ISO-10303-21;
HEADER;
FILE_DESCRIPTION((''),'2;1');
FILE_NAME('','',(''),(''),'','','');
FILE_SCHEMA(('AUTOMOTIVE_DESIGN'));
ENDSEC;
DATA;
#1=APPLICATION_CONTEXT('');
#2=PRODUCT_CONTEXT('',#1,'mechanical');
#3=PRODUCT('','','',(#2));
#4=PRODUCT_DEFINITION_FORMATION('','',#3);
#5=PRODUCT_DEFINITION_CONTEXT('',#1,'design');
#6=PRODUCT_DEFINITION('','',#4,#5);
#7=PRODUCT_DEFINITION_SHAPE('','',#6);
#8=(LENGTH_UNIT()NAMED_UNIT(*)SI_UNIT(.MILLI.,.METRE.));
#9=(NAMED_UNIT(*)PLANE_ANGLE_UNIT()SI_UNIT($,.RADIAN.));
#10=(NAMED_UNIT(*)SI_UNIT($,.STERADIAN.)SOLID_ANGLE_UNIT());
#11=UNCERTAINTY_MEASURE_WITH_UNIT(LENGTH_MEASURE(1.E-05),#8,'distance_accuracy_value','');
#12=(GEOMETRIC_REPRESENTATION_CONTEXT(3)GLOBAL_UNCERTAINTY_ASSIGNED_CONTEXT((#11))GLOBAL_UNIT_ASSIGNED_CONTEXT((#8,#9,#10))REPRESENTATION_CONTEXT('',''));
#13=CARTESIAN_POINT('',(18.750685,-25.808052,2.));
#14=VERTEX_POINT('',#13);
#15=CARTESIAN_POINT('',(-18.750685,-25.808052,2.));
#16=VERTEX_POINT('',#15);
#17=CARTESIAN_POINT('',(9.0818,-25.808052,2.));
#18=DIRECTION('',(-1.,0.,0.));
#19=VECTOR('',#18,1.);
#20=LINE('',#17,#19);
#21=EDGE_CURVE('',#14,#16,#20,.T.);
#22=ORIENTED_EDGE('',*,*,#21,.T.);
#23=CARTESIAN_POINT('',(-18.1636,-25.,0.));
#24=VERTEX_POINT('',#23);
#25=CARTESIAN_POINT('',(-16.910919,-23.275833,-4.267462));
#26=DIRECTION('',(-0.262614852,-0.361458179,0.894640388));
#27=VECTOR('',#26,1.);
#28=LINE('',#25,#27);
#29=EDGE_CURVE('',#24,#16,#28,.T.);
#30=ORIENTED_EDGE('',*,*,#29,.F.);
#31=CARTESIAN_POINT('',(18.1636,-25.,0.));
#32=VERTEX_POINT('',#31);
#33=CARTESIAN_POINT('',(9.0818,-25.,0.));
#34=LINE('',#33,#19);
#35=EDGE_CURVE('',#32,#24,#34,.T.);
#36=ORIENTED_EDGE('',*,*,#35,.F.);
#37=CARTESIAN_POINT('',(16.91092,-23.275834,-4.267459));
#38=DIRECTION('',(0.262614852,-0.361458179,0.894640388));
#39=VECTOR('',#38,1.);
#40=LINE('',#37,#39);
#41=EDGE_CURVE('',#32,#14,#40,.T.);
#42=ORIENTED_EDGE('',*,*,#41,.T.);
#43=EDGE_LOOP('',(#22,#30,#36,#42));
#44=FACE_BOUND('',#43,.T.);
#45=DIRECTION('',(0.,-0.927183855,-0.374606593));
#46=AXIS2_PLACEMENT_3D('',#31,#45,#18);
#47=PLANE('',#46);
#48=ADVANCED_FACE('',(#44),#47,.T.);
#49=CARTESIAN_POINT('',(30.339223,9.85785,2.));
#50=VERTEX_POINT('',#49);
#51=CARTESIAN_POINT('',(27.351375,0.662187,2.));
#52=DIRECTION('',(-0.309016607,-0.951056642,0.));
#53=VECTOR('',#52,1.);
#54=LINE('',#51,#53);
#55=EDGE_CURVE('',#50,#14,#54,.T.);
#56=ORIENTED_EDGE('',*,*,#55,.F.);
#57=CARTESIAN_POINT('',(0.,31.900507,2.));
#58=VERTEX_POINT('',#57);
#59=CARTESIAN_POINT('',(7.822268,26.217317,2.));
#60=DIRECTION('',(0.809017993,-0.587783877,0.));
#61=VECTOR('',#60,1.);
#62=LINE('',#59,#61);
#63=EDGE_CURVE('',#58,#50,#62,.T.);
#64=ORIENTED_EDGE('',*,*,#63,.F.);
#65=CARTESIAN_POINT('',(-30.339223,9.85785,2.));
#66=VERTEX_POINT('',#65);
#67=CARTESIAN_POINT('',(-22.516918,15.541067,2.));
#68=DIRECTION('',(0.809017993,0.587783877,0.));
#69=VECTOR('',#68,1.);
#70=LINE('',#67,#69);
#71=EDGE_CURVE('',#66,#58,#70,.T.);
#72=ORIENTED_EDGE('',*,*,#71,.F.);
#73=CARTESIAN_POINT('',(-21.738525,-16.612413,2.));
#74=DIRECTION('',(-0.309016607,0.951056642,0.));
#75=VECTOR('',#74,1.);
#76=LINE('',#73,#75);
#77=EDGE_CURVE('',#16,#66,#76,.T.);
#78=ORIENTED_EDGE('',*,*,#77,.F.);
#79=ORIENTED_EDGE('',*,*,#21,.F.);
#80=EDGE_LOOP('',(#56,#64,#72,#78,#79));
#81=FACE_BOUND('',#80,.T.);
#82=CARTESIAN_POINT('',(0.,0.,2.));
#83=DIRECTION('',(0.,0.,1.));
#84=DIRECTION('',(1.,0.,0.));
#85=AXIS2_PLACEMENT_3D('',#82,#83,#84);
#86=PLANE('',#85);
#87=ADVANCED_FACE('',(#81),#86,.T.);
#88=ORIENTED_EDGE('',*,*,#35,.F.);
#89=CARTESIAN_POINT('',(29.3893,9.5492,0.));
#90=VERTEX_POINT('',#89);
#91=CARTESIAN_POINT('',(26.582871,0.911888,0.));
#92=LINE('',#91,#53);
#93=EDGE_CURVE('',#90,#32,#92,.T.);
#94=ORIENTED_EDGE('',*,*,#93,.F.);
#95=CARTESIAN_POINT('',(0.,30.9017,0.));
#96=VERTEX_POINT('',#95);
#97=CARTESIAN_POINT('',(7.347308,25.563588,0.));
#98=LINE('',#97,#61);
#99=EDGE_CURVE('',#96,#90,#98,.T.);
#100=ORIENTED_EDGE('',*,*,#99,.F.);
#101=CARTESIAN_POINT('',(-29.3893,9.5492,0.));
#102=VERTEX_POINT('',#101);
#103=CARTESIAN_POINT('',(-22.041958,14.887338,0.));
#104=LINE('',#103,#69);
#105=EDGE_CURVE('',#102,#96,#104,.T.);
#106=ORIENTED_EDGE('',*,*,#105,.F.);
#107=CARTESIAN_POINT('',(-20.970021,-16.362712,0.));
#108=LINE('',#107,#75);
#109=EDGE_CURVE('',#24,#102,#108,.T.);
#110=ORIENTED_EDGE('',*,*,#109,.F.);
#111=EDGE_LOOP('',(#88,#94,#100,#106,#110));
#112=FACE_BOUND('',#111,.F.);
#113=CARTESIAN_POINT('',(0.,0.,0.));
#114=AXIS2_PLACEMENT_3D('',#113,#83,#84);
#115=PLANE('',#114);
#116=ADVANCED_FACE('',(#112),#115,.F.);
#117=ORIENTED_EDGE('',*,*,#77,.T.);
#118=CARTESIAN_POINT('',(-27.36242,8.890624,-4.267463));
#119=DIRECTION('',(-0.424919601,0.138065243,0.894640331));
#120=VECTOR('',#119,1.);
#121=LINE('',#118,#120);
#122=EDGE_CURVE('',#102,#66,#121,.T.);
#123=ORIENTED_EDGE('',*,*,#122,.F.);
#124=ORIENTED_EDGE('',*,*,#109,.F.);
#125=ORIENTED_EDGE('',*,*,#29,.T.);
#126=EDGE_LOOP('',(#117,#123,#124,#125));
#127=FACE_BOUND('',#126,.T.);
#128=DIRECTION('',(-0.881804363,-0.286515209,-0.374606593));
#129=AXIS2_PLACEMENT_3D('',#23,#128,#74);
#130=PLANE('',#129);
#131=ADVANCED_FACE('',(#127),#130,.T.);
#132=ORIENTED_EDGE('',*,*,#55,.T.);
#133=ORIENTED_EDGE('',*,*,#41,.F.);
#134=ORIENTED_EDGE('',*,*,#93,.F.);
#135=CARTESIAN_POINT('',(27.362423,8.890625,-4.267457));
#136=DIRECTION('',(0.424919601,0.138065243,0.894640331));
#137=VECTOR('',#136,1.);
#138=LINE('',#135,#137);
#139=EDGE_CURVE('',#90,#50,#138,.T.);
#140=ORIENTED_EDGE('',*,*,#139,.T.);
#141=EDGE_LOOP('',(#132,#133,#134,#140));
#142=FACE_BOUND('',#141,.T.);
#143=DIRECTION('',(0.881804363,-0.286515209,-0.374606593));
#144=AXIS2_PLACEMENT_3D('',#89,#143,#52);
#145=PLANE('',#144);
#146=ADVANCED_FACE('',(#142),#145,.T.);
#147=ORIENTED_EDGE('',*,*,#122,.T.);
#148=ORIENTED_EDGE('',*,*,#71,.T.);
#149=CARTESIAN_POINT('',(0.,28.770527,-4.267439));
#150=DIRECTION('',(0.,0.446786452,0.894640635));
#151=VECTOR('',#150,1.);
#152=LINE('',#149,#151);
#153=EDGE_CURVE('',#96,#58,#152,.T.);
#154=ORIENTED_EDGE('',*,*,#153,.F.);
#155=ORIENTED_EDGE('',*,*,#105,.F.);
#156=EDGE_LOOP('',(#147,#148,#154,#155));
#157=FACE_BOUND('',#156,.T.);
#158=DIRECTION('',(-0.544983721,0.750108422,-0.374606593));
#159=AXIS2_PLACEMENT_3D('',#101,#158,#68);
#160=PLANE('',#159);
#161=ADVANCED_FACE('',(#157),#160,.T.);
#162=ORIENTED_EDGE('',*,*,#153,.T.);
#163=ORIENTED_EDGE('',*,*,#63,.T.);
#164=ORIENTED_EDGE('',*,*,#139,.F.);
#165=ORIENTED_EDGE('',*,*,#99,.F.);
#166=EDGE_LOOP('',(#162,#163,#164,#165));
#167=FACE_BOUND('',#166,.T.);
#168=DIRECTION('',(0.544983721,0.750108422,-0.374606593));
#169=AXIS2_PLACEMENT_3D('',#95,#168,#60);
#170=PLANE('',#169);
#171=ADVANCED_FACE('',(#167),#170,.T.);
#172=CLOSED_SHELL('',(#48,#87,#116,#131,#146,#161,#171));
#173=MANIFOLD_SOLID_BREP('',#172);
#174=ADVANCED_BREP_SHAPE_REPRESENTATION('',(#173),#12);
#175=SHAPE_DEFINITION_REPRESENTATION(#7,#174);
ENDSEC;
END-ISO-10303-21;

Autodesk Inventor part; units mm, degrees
ref_plane "YZ Plane" through (0, 0, 0) normal (1, 0, 0) x (0, 1, 0)
ref_plane "XZ Plane" through (0, 0, 0) normal (0, 1, 0) x (-1, 0, 0)
ref_plane "XY Plane" through (0, 0, 0) normal (0, 0, 1) x (1, 0, 0)
sketch "Sketch1" plane through (0, 0, 0) normal (0, 0, 1) x (1, 0, 0)
  line L0 (0, 30.9017) -> (29.3893, 9.5492)
  line L1 (29.3893, 9.5492) -> (18.1636, -25)
  line L2 (18.1636, -25) -> (-18.1636, -25)
  line L3 (-18.1636, -25) -> (-29.3893, 9.5492)
  line L4 (-29.3893, 9.5492) -> (0, 30.9017)
  point P0 (0, 0)
  point P1 (0, 0)
  dimension "d0" = 25
extrude "Extrusion1" add sketch "Sketch1" along normal blind 2 draft 22
properties part number "Face" material "Gold"
